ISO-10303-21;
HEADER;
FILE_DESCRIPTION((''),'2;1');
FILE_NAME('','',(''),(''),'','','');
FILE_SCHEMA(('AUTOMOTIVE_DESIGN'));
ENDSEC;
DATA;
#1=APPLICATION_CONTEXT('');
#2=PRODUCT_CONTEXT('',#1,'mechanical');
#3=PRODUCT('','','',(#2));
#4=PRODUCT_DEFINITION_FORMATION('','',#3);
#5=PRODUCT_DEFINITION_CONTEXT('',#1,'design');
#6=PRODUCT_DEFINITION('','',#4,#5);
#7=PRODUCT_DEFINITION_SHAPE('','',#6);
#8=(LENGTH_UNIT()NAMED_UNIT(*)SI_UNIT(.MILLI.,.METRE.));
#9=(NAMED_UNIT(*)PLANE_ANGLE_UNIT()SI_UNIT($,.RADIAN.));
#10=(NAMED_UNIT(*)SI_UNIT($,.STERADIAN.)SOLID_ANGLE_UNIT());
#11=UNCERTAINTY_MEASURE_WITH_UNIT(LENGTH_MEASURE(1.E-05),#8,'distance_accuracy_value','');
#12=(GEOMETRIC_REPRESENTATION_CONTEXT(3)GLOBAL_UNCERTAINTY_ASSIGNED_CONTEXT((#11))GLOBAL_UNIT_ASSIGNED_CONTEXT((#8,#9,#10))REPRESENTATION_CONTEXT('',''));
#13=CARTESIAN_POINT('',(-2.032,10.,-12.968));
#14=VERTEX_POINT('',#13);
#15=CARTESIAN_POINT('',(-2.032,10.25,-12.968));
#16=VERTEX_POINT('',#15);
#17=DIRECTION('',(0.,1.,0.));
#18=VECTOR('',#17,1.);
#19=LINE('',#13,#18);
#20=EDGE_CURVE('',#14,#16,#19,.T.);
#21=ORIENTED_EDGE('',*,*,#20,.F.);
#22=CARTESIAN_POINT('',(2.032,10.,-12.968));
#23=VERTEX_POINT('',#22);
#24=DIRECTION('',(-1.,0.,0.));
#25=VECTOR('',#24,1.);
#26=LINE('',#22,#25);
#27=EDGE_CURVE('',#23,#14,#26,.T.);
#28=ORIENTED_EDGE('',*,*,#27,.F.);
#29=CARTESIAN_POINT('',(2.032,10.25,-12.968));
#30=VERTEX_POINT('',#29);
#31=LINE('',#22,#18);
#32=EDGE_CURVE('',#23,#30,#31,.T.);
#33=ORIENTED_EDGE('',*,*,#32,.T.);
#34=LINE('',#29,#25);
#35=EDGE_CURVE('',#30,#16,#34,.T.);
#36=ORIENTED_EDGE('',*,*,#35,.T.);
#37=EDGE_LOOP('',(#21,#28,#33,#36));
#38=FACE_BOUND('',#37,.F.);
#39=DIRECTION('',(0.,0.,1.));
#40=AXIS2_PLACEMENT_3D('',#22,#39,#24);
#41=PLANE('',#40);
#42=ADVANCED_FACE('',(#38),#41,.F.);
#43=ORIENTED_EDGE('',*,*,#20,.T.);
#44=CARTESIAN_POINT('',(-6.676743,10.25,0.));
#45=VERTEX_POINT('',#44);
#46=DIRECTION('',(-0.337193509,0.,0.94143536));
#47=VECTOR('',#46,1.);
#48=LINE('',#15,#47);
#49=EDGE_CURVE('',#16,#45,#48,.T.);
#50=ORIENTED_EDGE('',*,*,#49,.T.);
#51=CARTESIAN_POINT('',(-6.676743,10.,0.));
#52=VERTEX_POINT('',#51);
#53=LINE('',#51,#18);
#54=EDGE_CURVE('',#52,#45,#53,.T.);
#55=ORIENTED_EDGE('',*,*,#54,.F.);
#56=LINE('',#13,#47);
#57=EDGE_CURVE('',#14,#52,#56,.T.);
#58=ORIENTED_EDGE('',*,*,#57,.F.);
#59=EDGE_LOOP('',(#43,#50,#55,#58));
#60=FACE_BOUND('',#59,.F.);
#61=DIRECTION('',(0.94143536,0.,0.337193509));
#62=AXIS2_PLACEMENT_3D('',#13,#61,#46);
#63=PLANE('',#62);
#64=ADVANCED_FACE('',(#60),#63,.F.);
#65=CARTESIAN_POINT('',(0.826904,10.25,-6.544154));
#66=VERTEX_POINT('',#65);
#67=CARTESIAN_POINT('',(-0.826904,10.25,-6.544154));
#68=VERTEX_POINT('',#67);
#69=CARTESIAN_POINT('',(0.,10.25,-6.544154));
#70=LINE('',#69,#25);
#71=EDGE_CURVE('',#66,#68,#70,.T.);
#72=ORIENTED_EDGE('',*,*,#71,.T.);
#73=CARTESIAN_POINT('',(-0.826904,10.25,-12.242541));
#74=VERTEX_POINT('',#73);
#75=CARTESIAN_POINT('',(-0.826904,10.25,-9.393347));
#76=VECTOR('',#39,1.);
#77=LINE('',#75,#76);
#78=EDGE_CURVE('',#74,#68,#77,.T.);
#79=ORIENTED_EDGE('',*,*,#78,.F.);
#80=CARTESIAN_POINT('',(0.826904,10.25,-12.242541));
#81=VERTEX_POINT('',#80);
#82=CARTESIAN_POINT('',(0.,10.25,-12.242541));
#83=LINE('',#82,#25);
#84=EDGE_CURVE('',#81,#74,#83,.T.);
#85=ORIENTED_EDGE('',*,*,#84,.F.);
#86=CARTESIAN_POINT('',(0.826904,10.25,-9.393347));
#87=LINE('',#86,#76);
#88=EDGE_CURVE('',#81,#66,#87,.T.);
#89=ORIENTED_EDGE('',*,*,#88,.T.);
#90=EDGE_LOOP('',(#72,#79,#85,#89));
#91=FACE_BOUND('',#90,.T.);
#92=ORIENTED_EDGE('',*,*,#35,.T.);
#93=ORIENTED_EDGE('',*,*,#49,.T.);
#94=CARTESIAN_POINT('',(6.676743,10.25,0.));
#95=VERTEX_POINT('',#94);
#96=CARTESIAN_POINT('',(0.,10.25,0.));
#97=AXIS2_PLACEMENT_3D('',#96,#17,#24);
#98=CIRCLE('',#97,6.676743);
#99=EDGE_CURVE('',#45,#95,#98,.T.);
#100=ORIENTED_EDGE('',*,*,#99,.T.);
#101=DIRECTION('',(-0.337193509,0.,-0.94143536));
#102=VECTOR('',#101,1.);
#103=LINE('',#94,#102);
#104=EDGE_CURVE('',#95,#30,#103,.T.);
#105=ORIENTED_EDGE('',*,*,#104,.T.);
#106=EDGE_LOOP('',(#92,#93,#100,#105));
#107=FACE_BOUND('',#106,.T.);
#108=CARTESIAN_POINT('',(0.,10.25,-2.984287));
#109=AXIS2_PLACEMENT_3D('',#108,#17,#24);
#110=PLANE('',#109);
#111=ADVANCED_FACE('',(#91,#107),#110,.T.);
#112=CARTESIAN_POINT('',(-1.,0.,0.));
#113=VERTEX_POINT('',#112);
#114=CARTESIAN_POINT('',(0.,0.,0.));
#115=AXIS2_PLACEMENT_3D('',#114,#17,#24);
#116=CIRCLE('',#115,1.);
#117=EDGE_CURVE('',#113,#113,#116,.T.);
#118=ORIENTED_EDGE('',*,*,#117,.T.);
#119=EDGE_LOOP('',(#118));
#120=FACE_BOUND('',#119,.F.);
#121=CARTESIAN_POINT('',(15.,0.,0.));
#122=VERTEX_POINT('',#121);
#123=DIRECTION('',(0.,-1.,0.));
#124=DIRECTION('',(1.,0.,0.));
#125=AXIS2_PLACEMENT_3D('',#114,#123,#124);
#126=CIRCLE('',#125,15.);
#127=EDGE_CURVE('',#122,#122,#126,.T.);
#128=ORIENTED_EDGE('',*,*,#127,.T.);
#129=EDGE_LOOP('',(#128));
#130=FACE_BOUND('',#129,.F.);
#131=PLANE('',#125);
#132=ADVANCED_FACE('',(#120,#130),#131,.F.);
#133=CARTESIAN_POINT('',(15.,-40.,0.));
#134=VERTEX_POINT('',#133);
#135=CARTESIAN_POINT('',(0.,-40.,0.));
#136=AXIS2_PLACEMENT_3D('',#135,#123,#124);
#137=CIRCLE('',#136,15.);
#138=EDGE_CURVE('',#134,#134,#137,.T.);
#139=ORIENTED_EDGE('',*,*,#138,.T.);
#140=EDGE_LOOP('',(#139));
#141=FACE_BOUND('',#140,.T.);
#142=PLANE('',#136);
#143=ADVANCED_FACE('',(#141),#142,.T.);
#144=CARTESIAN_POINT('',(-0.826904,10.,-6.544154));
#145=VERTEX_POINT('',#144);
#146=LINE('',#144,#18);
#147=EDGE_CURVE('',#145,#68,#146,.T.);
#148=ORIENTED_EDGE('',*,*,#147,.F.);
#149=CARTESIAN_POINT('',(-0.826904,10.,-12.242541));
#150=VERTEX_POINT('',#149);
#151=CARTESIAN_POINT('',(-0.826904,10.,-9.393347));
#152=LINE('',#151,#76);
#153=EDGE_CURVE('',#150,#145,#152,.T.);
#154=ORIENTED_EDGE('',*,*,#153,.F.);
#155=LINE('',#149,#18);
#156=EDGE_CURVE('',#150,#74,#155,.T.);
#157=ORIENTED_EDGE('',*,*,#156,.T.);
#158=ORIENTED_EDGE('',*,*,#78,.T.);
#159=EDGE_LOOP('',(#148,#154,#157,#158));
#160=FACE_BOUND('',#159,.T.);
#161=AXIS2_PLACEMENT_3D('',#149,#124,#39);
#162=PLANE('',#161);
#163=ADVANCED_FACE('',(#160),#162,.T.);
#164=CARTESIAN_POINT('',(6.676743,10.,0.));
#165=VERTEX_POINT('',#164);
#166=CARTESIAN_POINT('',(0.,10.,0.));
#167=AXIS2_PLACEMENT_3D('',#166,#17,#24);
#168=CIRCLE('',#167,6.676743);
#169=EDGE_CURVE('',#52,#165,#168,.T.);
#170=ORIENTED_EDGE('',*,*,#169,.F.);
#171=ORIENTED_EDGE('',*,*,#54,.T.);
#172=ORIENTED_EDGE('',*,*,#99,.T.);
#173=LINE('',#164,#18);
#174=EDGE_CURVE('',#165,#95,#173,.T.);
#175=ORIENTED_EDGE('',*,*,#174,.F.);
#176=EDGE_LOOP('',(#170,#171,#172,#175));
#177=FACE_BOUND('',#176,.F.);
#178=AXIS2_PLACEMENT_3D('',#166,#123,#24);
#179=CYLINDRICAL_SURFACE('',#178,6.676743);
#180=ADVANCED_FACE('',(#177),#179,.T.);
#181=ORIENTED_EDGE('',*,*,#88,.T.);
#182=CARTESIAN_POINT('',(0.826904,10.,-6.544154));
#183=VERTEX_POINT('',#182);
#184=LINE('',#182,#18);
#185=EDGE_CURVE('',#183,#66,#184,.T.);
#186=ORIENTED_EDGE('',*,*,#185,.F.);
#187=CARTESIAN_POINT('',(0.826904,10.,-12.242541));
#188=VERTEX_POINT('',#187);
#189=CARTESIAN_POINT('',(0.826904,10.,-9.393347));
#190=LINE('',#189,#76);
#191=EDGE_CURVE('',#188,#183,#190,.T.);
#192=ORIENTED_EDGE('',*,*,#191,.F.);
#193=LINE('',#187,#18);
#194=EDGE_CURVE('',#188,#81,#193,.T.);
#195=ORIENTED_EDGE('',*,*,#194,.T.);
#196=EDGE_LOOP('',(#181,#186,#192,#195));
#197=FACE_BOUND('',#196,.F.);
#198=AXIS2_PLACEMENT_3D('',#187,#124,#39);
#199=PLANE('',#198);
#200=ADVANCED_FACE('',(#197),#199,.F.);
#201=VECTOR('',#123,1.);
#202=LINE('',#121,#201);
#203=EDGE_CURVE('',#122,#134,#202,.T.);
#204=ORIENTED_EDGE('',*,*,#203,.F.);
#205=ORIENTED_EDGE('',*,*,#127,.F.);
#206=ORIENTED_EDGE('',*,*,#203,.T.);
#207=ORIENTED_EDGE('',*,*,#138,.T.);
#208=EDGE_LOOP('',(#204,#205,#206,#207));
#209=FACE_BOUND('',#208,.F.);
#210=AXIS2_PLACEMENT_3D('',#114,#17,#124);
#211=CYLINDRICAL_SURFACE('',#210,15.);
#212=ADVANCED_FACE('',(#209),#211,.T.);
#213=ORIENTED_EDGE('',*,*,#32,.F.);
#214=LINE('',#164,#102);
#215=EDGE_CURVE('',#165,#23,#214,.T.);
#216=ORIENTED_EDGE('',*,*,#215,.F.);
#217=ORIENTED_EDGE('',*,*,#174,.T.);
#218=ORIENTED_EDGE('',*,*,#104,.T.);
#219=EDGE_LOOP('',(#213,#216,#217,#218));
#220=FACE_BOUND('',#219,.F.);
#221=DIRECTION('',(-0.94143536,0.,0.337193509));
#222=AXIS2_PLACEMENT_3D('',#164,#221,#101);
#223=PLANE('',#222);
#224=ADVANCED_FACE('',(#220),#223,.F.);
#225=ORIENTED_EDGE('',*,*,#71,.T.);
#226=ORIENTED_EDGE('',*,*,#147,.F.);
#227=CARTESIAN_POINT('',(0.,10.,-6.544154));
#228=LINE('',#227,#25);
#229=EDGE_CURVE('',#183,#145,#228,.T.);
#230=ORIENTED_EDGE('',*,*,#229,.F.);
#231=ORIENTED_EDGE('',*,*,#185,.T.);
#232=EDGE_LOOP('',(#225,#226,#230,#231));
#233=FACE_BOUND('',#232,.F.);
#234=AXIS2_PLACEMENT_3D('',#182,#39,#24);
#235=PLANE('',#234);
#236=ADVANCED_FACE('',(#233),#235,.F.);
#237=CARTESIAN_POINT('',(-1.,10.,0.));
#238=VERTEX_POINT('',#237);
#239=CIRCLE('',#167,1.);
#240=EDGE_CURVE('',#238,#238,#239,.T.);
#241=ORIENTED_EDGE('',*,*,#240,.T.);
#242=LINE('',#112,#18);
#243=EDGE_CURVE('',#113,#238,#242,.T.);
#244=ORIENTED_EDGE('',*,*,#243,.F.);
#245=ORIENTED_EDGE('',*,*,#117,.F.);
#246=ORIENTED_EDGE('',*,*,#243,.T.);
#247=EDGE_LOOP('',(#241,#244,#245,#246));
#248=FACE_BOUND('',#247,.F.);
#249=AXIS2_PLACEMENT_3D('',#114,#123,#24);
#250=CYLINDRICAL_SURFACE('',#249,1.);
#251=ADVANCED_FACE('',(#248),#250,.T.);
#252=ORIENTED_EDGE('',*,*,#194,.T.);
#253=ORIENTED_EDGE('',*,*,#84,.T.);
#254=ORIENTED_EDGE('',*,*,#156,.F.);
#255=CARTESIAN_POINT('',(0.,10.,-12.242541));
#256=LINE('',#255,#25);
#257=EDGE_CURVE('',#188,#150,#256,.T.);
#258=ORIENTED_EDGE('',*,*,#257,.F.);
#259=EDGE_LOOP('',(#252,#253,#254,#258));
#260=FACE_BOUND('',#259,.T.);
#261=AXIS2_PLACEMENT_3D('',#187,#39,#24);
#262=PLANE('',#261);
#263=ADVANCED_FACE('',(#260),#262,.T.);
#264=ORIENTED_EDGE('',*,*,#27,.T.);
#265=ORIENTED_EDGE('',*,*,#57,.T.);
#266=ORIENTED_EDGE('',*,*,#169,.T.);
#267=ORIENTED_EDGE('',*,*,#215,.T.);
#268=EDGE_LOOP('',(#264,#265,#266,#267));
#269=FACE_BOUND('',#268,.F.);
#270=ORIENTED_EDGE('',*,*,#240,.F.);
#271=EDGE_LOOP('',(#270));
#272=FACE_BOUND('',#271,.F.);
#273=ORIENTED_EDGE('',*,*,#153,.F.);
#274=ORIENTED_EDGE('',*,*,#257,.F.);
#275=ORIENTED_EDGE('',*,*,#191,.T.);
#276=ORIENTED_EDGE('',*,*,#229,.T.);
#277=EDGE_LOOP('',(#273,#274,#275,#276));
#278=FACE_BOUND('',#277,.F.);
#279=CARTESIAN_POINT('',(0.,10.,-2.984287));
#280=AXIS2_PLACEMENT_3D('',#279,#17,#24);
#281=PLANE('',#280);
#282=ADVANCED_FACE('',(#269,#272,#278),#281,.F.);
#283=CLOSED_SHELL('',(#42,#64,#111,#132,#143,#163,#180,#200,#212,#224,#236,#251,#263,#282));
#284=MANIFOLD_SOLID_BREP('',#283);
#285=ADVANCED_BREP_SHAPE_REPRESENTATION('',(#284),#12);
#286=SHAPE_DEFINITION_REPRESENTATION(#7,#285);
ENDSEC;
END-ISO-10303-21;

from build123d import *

# Parameters (mm, degrees)
F0_R     = 15
F1_DEPTH = 40
F2_R     = 1
F3_DEPTH = 10
F7_W     = 1.6538074706
F7_H     = 5.6983865798
F8_DEPTH = 0.25


# Not quite as in the source:
# - the program builds the solid bodies; features that only make, move or delete a surface that nothing else refers to are left out


with BuildPart() as f1:
    # F0 (on Front) → F1 (new body)
    with BuildSketch(Plane.XZ):
        Circle(F0_R)
    extrude(amount=F1_DEPTH)

    # F2 (on face) → F3 (join)
    with BuildSketch(Plane(origin=(0, 0, 0), x_dir=(-1, 0, 0), z_dir=(0, 1, 0))):
        Circle(F2_R)
    extrude(amount=F3_DEPTH)

    # F7 (on face) → F8 (join)
    with BuildSketch(Plane(origin=(0, 10, 0), x_dir=(-1, 0, 0), z_dir=(0, 1, 0))):
        with BuildLine():
            Line((2.032, -12.968), (6.6767431337, 0))
            ThreePointArc((6.6767431337, 0), (0, 6.6767431337), (-6.6767431337, 0))
            Line((-6.6767431337, 0), (-2.032, -12.968))
            Line((-2.032, -12.968), (2.032, -12.968))
        make_face()
        with Locations((0, -9.3933474272)):
            Rectangle(F7_W, F7_H, mode=Mode.SUBTRACT)
    extrude(amount=F8_DEPTH)


solid = f1.part
